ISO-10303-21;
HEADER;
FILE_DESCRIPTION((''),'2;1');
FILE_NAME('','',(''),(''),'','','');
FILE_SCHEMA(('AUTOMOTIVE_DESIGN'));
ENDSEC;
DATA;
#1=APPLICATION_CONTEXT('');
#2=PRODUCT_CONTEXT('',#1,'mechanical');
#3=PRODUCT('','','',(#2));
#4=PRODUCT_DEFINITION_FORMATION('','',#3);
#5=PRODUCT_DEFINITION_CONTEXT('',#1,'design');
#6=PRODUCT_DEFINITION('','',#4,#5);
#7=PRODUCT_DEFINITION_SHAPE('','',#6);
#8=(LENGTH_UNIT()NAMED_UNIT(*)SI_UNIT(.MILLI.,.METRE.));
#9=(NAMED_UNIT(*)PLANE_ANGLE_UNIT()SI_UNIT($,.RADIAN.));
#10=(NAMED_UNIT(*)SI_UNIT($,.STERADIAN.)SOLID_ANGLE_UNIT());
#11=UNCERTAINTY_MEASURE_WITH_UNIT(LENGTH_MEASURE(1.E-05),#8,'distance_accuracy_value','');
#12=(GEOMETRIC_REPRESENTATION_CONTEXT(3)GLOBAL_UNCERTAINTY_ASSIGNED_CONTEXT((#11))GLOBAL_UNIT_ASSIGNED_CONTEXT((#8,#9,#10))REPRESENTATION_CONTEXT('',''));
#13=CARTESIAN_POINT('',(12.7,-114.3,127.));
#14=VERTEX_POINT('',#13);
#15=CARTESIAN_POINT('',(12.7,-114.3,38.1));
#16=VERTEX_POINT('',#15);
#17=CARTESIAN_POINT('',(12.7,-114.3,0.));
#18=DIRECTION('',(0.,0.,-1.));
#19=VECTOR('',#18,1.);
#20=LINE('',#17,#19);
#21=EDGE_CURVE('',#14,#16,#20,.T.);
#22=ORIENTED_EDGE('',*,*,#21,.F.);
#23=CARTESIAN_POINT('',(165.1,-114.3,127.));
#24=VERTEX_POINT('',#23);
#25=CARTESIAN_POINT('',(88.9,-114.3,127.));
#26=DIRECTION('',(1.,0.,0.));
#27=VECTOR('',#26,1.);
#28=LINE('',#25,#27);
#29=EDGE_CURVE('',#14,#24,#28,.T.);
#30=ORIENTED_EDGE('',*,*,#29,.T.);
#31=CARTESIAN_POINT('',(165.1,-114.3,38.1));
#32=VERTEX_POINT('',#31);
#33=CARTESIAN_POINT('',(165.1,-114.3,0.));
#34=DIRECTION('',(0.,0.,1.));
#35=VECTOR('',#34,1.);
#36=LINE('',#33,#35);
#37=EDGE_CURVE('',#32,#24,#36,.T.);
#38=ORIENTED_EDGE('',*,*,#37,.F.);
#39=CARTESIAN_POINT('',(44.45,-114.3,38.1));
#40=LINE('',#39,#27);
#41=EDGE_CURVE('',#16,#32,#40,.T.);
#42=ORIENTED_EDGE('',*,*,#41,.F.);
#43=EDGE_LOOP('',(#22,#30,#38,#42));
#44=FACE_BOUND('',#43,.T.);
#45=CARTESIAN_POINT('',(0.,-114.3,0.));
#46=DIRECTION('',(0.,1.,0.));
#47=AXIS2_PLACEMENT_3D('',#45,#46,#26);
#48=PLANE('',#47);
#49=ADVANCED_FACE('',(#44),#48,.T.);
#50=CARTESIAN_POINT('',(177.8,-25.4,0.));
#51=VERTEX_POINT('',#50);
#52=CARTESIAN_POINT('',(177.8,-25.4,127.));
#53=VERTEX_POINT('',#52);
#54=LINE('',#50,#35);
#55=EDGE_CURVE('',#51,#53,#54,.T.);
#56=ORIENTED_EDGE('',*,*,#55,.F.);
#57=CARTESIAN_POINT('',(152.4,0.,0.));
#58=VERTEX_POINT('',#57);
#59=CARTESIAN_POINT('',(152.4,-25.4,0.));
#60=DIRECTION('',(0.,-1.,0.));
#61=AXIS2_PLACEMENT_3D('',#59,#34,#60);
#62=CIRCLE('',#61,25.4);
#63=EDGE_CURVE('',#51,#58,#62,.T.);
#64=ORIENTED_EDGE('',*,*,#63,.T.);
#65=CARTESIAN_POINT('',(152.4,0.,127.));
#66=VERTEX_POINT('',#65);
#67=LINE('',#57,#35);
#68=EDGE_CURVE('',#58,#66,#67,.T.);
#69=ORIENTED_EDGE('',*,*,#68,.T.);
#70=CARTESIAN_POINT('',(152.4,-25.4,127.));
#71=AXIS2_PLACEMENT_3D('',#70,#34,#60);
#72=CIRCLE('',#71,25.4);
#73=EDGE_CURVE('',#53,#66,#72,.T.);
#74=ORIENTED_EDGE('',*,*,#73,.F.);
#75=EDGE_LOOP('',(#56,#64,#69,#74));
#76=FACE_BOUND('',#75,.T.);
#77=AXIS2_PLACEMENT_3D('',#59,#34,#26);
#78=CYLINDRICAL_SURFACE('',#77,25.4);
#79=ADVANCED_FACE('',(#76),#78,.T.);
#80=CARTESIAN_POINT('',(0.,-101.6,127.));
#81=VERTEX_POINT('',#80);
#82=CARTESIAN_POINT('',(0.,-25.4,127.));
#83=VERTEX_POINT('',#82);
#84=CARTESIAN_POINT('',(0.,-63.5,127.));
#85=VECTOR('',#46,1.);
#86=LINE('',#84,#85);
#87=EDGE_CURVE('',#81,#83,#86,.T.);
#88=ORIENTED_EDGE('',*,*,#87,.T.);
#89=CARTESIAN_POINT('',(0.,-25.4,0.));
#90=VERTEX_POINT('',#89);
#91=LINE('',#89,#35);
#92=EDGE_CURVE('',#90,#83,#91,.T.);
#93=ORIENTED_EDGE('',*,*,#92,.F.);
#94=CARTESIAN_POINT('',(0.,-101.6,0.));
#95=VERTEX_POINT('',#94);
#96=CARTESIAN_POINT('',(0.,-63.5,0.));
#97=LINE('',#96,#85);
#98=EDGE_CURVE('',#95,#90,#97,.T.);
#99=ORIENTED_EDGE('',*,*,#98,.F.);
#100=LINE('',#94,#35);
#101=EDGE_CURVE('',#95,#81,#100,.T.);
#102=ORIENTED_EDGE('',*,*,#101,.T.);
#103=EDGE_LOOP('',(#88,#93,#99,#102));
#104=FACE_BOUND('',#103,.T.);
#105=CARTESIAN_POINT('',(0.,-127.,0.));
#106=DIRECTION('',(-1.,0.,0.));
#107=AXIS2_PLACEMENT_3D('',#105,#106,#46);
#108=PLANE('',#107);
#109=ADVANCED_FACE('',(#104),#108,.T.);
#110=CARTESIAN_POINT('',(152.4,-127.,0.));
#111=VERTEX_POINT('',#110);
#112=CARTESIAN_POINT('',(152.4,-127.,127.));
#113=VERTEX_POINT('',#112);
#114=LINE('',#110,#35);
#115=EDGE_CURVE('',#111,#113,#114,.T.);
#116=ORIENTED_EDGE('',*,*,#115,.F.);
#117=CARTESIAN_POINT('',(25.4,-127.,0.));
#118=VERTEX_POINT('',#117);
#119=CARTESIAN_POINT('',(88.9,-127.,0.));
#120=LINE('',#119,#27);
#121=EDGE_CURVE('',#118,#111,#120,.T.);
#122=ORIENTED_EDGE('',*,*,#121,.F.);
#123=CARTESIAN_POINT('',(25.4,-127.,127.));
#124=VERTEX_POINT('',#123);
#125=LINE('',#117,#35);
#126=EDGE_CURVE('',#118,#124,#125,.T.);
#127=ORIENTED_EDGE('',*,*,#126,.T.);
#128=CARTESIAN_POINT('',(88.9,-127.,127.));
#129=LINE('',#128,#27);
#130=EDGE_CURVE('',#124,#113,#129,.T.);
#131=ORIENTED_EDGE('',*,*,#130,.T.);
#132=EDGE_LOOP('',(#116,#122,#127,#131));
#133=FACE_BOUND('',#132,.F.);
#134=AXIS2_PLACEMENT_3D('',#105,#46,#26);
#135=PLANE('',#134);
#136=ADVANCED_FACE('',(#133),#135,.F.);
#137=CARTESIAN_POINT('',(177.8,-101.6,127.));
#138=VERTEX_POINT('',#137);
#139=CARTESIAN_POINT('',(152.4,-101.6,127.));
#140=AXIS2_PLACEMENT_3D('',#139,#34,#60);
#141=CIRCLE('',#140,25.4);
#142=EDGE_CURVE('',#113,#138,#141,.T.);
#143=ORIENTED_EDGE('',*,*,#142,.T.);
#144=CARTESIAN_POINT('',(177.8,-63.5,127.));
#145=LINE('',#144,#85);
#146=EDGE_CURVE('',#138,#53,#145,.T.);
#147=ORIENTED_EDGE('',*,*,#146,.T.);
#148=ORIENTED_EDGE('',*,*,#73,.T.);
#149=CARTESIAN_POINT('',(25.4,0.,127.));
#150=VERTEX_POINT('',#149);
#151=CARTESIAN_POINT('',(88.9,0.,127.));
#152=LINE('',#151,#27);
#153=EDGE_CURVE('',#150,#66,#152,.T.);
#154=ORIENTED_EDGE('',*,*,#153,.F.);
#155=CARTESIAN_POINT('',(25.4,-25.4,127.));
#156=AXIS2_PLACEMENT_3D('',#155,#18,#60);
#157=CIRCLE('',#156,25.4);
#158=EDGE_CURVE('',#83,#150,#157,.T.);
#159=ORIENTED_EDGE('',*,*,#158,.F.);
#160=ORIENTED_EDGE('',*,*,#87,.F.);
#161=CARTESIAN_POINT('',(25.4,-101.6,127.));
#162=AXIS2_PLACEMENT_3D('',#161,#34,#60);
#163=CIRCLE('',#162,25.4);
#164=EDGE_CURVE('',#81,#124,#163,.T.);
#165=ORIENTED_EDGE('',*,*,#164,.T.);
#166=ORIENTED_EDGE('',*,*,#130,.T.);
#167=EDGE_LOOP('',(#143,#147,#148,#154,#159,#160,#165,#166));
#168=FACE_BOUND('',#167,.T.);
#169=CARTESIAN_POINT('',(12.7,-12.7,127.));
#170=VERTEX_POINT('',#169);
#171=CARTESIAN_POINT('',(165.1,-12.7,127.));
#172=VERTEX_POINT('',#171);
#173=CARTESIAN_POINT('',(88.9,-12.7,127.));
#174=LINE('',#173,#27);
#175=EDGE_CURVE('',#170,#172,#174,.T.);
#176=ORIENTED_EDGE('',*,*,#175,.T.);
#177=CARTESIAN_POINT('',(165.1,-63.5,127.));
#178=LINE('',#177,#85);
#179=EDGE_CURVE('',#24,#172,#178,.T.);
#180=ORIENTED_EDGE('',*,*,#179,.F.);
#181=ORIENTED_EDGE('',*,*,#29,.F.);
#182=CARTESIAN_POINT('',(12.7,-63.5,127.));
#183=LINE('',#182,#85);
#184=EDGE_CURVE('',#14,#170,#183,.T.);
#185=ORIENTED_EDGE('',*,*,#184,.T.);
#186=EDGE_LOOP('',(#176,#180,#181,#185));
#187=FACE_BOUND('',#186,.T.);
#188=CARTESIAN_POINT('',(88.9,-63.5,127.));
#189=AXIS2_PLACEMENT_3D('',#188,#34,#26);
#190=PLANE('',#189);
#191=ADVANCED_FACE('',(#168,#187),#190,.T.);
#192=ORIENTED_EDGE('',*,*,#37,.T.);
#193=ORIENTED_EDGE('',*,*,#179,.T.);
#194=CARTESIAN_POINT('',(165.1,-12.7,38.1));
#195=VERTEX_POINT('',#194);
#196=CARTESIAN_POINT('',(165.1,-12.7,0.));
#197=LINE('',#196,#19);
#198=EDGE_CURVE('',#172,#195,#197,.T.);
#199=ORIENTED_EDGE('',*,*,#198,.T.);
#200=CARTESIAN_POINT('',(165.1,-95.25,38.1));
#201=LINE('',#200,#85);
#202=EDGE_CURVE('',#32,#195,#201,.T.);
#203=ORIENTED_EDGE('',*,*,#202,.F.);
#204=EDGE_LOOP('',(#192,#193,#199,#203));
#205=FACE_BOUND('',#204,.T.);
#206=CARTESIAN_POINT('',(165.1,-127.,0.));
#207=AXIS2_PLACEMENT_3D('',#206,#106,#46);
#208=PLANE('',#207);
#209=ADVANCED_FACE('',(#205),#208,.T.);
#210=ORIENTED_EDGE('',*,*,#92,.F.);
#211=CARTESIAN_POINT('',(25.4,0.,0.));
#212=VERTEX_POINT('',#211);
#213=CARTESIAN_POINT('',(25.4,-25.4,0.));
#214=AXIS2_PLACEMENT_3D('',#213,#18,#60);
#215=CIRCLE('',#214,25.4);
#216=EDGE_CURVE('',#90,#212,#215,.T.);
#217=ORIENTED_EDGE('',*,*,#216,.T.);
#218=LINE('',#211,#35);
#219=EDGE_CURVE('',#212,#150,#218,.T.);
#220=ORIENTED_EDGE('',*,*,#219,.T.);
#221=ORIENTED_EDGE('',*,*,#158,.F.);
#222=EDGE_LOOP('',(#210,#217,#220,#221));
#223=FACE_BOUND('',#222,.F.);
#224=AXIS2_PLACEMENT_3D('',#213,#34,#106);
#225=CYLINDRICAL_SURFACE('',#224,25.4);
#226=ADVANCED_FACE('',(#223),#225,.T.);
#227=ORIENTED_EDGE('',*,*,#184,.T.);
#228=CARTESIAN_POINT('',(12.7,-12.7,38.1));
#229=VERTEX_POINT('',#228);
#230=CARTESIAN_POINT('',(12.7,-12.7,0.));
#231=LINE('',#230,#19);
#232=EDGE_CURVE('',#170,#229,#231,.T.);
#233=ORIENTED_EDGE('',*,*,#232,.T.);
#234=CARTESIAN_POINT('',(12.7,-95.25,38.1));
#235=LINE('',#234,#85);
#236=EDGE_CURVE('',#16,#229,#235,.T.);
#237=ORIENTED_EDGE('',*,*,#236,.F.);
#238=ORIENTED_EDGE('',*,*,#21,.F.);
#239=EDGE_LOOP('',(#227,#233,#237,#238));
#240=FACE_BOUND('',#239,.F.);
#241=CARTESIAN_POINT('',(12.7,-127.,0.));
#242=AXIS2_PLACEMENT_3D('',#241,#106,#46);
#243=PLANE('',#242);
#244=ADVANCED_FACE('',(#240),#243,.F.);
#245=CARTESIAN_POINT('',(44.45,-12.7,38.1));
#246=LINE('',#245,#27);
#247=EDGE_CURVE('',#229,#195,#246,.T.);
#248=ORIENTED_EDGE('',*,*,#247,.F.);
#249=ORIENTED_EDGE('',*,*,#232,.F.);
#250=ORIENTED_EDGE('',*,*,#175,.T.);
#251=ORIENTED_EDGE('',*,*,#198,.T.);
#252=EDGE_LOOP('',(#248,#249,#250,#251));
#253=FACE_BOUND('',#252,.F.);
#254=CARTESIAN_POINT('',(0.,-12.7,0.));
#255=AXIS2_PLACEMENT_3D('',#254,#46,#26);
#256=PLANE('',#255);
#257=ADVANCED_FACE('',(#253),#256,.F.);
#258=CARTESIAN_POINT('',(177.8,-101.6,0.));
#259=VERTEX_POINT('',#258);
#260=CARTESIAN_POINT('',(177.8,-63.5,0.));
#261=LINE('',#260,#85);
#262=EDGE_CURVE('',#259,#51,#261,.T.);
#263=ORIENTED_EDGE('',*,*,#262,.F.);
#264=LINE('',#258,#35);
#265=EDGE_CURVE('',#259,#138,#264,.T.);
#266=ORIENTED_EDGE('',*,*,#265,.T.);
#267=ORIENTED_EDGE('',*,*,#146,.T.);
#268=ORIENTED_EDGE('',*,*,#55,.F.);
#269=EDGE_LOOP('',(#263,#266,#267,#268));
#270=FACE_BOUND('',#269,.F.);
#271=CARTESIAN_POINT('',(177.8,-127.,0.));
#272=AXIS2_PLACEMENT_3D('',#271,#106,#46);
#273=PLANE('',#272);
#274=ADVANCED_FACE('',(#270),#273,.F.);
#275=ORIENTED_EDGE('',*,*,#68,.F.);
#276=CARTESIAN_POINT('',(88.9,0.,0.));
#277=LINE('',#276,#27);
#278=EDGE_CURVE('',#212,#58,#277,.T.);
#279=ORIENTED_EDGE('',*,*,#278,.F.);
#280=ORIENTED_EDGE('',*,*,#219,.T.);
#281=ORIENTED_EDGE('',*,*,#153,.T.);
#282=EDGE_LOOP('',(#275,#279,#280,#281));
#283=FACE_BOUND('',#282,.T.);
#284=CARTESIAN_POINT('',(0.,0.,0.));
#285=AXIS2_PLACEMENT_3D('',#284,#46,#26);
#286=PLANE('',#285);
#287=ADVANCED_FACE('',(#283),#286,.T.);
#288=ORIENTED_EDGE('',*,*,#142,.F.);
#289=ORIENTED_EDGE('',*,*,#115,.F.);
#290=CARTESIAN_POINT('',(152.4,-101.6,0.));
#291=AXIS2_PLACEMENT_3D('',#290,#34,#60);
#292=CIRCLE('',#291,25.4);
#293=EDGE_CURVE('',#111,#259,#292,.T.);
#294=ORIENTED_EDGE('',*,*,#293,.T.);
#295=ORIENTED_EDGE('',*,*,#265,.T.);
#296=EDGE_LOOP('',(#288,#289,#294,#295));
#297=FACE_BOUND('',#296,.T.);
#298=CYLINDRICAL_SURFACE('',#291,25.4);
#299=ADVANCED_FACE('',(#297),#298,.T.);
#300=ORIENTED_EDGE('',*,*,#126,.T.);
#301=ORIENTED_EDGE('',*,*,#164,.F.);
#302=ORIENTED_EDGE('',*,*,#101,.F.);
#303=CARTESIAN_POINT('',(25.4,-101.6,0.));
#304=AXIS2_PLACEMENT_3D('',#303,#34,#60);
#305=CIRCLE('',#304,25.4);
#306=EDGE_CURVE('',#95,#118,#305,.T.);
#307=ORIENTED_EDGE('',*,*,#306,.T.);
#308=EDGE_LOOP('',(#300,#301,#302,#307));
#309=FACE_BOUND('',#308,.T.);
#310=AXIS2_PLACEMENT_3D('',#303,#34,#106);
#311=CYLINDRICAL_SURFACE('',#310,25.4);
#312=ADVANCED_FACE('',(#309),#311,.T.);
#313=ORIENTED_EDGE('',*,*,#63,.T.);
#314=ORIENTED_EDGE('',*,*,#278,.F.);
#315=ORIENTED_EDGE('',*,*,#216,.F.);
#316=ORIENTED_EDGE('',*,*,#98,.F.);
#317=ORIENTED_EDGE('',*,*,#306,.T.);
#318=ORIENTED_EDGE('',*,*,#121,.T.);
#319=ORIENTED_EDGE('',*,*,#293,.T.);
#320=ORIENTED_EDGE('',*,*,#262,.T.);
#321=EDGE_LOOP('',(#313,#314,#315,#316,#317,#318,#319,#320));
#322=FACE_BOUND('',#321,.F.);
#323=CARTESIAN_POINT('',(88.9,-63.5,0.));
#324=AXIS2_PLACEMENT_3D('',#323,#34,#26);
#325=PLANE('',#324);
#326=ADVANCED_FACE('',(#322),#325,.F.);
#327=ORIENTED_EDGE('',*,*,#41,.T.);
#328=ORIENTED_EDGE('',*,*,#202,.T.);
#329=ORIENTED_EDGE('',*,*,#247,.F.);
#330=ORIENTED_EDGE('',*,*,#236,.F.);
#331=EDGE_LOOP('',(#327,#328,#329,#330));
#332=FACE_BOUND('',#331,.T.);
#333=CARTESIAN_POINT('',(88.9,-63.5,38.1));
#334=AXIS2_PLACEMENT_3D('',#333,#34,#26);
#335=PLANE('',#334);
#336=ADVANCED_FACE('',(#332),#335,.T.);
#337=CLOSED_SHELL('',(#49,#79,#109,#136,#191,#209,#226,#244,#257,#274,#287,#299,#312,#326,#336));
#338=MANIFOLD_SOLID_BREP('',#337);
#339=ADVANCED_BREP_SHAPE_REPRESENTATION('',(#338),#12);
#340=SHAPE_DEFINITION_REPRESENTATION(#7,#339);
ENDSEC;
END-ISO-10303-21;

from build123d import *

# Parameters (mm, degrees)
F0_W     = 177.8
F0_H     = 127
F1_DEPTH = 127
F2_T     = -12.7
F3_DEPTH = 25.4
F4_R     = 25.4


with BuildPart() as f1:
    # F0 (on Top) → F1 (new body)
    with BuildSketch(Plane.XY):
        with Locations((88.9, -63.5)):
            Rectangle(F0_W, F0_H)
    extrude(amount=F1_DEPTH)

    # F2
    f2_openings = [f1.faces().sort_by_distance(p)[0] for p in [
        (88.9, -63.5, 127),
    ]]
    offset(amount=F2_T, openings=f2_openings)

    # F3 (add): a face of the model
    f3_faces = [f1.faces().sort_by_distance(p)[0] for p in [
        (88.9, -63.5, 12.7),
    ]]
    extrude(f3_faces, amount=F3_DEPTH)

    # F4
    f4_edges = [f1.edges().sort_by_distance(p)[0] for p in [
        (177.8, 0, 63.5),
        (177.8, -127, 63.5),
        (0, 0, 63.5),
        (0, -127, 63.5),
    ]]
    fillet(f4_edges, radius=F4_R)


solid = f1.part
